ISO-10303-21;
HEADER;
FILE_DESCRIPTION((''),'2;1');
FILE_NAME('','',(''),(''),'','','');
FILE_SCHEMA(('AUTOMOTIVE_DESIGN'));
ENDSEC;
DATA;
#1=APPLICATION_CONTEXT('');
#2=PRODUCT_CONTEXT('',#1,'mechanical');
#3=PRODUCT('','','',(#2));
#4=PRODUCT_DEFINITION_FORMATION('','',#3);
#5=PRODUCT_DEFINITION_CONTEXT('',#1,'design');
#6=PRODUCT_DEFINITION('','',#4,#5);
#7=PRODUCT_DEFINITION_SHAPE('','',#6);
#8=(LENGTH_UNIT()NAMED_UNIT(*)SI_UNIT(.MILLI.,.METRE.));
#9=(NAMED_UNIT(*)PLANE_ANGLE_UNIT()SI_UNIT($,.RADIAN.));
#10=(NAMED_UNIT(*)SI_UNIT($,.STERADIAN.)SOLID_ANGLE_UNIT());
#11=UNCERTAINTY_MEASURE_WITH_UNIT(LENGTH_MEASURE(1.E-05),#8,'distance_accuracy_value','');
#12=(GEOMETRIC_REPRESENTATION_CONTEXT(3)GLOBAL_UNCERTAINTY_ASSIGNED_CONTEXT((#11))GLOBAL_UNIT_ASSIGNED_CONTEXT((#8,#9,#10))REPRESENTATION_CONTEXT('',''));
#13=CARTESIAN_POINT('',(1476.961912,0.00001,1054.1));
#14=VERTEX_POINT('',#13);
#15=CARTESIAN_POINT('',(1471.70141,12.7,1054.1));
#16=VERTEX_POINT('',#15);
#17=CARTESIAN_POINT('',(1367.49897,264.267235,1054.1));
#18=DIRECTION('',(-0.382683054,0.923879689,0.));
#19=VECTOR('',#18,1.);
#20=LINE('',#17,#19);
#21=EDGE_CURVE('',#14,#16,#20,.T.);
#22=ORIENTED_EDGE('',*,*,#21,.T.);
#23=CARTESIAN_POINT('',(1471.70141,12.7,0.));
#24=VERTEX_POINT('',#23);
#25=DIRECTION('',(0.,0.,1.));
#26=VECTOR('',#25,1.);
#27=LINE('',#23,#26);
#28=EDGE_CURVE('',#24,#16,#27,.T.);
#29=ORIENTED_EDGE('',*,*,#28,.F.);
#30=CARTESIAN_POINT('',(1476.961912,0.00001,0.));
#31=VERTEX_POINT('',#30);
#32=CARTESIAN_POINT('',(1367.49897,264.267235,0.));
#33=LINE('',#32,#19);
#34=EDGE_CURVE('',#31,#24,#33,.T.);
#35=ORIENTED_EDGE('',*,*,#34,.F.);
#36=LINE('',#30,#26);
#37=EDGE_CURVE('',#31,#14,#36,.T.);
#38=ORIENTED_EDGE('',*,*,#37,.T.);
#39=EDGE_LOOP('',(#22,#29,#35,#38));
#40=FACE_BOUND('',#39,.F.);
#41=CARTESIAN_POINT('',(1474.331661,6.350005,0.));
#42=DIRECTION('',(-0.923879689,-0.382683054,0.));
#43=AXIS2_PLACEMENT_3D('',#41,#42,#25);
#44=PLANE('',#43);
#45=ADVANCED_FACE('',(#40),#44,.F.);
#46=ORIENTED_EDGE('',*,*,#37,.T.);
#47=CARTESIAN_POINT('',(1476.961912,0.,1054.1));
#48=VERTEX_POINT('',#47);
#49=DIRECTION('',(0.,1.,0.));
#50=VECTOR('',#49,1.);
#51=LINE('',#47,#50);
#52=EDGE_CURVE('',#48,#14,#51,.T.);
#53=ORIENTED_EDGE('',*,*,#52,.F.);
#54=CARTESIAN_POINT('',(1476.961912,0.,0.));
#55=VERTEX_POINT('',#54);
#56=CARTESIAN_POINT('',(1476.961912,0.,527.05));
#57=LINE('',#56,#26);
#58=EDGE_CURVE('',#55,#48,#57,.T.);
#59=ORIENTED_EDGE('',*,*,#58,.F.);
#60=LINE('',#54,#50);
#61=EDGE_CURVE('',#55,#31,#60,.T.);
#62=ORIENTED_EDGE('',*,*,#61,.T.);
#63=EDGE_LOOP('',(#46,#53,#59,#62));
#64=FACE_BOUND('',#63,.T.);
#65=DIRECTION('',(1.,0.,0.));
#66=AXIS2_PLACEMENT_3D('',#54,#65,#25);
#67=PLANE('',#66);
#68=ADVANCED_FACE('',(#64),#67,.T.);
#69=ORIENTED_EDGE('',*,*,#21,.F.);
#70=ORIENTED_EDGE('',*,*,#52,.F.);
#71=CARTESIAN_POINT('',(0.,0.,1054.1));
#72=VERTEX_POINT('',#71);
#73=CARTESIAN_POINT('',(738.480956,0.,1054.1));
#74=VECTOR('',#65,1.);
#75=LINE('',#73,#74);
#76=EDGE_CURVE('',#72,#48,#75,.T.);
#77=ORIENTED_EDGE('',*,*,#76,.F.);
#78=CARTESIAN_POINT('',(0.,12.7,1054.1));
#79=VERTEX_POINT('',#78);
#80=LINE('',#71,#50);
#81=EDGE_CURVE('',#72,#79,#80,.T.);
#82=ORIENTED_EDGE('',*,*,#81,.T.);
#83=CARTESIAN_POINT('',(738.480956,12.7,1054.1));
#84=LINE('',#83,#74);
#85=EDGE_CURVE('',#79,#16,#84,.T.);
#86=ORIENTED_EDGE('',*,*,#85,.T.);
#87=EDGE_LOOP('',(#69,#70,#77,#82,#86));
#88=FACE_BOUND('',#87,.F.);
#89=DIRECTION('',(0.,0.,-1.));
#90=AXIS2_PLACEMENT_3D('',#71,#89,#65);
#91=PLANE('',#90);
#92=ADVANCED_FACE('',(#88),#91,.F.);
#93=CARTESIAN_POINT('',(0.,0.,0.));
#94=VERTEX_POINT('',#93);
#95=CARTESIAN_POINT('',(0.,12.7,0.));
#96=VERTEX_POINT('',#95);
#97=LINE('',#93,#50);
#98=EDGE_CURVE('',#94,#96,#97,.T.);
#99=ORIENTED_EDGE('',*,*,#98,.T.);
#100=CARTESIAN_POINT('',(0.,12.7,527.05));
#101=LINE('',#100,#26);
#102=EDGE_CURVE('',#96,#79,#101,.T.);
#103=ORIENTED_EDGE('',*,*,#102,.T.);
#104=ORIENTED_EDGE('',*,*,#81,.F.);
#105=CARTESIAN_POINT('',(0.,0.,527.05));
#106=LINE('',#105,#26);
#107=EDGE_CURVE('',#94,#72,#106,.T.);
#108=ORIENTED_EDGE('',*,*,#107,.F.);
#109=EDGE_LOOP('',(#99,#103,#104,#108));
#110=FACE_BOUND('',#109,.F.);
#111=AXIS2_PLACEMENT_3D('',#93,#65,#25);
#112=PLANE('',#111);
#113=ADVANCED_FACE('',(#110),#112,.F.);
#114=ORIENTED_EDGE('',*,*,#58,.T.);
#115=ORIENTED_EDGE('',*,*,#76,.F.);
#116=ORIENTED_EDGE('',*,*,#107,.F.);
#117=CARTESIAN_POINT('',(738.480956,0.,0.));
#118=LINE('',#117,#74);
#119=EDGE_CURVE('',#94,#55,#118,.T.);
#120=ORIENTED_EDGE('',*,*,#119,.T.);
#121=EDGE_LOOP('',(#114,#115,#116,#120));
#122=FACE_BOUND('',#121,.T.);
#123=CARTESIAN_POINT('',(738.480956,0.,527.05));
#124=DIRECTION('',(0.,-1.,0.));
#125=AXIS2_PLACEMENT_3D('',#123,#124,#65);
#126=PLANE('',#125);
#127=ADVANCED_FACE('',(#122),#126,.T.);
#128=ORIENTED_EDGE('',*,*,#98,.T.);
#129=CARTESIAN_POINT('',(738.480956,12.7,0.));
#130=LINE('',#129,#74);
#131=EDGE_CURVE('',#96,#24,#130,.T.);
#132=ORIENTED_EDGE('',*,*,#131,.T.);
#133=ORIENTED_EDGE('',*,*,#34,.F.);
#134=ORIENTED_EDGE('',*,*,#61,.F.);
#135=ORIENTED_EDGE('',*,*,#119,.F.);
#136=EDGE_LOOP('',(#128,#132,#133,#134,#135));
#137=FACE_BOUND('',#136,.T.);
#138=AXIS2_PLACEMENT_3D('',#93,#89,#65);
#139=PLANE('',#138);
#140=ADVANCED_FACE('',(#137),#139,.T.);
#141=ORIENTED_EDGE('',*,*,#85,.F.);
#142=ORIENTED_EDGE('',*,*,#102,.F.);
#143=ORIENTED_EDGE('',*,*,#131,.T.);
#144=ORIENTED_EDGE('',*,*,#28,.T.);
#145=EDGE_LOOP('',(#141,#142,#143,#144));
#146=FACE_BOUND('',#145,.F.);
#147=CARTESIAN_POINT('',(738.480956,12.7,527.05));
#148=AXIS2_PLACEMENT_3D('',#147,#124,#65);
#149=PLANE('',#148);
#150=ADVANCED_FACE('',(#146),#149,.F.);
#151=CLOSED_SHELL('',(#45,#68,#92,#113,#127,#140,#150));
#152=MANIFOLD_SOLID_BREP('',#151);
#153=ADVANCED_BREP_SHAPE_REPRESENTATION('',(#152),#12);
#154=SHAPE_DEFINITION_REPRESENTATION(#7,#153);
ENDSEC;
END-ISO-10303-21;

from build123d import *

# Parameters (mm, degrees)
F0_W     = 1476.9619122421
F0_H     = 1054.1
F1_DEPTH = 12.7
F2_SIZE2 = 5.260502
F2_SIZE  = 12.69999


# Not quite as in the source:
# - a fillet or chamfer is up to 0.001 mm smaller than in the source, because OpenCascade refuses the exact size


with BuildPart() as f1:
    # F0 (on Front) → F1 (new body)
    with BuildSketch(Plane.XZ):
        with Locations((738.4809561211, 527.05)):
            Rectangle(F0_W, F0_H)
    extrude(amount=-F1_DEPTH)

    # F2 (size 12.7 and 5.2605122421 in the source; OpenCascade refuses exactly that, so slightly less here)
    f2_edges = [f1.edges().sort_by_distance(p)[0] for p in [
        (1476.961912, 12.7, 527.05),
    ]]
    f2_side = f1.faces().sort_by_distance((1476.961912, 6.35, 527.05))[0]
    chamfer(f2_edges, length=F2_SIZE, length2=F2_SIZE2, reference=f2_side)


solid = f1.part
